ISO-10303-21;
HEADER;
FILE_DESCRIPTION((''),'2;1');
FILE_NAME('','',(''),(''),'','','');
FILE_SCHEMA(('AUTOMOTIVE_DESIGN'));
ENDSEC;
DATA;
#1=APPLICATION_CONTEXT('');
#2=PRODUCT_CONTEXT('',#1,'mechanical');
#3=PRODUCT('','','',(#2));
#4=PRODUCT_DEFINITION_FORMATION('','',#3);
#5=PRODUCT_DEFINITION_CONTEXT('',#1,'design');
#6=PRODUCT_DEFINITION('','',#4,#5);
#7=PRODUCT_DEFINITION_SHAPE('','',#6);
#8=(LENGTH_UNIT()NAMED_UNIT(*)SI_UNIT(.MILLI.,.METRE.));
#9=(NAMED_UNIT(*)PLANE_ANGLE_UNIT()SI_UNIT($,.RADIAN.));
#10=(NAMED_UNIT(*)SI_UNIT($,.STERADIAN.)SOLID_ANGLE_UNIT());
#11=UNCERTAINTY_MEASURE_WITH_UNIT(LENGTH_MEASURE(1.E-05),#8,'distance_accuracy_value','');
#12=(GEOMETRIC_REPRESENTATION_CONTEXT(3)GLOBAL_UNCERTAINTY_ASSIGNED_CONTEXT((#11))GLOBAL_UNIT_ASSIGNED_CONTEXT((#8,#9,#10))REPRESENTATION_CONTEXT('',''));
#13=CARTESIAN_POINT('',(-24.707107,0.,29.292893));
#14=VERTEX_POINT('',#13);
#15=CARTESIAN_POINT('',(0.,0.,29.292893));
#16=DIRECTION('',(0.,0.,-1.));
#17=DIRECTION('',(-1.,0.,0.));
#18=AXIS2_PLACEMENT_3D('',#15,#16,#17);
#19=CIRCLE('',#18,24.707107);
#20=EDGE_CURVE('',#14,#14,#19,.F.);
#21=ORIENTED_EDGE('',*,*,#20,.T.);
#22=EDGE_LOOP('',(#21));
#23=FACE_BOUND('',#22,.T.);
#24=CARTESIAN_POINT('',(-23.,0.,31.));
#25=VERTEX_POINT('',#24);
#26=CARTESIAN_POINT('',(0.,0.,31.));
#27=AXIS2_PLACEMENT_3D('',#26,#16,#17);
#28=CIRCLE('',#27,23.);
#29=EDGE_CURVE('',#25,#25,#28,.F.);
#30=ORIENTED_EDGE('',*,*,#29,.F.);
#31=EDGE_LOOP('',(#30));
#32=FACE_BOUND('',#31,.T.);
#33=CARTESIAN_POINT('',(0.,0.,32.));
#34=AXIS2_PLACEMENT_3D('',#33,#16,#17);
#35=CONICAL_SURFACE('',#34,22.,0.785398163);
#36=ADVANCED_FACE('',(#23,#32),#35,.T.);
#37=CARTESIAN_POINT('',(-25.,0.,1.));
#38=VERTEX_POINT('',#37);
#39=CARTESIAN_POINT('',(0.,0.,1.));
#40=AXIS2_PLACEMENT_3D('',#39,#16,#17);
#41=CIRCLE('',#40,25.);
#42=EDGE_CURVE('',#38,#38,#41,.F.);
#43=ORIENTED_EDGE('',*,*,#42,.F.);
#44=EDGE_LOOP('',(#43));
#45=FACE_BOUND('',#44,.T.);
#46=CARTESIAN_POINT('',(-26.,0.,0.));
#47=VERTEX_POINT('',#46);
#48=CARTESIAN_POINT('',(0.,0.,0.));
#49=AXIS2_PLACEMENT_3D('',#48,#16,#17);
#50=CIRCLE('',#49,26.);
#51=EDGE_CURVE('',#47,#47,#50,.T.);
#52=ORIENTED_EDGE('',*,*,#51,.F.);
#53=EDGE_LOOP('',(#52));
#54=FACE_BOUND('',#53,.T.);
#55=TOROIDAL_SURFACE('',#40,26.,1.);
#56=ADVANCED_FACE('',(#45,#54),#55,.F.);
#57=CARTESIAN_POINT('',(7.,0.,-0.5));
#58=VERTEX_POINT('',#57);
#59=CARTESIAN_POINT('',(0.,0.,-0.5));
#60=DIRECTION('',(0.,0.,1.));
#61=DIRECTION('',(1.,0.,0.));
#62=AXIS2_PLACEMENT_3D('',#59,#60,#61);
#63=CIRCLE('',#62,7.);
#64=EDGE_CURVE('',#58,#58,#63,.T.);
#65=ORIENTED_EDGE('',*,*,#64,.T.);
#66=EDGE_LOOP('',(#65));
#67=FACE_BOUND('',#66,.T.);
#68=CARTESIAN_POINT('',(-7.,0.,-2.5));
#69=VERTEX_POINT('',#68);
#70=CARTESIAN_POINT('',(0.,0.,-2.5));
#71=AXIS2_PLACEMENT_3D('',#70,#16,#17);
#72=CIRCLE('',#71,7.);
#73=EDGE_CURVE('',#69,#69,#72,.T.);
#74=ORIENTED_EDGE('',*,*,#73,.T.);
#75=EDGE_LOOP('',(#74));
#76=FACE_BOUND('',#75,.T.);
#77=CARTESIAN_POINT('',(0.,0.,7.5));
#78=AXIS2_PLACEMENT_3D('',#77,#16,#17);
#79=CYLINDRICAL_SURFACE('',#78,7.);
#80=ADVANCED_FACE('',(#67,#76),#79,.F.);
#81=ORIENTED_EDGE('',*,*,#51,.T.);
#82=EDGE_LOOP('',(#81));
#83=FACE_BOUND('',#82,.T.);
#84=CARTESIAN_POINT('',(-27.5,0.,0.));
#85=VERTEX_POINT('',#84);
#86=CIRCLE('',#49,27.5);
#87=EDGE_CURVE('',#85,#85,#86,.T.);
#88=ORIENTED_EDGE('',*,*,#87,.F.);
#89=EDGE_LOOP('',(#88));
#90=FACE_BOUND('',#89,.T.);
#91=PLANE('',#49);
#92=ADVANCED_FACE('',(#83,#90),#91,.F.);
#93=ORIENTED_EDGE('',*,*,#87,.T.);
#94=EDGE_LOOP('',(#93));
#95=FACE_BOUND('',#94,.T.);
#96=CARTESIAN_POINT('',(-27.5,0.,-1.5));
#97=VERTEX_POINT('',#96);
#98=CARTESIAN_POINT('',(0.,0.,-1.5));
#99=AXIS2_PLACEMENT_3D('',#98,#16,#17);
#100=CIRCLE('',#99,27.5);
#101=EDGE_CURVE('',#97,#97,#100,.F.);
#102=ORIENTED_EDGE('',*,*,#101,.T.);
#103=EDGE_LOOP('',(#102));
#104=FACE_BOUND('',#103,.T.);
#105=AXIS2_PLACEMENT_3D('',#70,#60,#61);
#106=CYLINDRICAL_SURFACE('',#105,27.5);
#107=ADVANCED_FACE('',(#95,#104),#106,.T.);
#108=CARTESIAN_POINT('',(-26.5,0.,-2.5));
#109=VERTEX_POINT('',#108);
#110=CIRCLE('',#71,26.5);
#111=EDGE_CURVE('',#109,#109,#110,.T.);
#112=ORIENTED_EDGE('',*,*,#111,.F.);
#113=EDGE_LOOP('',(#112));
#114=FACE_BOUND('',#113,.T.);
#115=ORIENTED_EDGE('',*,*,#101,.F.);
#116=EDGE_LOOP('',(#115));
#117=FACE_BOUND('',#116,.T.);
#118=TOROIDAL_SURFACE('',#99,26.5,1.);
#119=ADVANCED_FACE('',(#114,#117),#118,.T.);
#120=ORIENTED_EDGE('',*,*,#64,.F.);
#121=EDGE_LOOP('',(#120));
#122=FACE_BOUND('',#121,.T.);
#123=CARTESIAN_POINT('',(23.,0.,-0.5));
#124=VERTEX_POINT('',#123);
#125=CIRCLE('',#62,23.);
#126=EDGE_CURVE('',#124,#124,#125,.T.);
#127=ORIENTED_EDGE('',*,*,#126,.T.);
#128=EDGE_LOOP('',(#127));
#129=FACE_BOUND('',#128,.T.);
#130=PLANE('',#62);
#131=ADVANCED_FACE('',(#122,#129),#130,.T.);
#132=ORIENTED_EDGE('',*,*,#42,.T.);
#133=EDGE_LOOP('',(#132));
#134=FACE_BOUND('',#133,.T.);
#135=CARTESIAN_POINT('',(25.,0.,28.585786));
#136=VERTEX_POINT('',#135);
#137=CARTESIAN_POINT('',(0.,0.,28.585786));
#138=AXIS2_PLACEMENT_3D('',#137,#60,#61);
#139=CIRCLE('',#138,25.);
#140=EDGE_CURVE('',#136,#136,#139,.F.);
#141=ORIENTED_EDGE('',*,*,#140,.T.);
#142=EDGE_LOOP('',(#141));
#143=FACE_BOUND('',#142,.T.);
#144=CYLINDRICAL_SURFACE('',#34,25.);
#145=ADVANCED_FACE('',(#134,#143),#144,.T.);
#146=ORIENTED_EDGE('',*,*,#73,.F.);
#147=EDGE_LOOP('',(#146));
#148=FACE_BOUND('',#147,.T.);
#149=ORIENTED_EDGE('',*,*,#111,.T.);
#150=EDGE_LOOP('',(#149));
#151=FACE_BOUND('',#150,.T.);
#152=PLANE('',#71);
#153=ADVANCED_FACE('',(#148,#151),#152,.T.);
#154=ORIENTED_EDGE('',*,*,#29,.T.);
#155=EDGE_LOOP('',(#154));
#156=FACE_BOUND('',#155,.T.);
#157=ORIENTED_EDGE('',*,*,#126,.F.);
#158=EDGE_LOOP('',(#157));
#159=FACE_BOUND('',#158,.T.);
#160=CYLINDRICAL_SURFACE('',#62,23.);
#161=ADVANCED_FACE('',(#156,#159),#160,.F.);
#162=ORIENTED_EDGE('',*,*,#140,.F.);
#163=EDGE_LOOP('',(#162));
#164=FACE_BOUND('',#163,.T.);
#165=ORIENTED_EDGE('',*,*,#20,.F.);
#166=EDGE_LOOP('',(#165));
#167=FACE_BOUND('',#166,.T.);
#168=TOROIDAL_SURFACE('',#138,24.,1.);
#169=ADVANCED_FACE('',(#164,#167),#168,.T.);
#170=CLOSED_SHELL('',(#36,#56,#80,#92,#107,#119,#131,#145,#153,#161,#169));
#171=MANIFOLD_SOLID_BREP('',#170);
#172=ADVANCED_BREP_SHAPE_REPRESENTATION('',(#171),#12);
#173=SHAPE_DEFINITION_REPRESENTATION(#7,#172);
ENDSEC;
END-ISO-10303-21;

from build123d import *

# Parameters (mm, degrees)
SKETCH_1_R          = 25
EXTRUDE_1_DEPTH     = 32
SKETCH_2_R          = 27.5
EXTRUDE_2_DEPTH     = 2.5
SKETCH_3_R          = 23
CUT_EXTRUDE_1_DEPTH = 32.5
CHAMFER_1_SIZE      = 3
FILLET_1_R          = 1
FILLET_2_R          = 1
FILLET_3_R          = 1
SKETCH_4_R          = 1.6
CUT_EXTRUDE_2_DEPTH = 32.5
SKETCH_5_R          = 7
CUT_EXTRUDE_3_DEPTH = 10


with BuildPart() as part:
    # Эскиз1 → Бобышка-Вытянуть1 (new body)
    with BuildSketch(Plane.XY):
        Circle(SKETCH_1_R)
    extrude(amount=EXTRUDE_1_DEPTH)

    # Эскиз2 → Бобышка-Вытянуть2 (add)
    with BuildSketch(Plane(origin=(0, 0, 0), x_dir=(-1, 0, 0), z_dir=(0, 0, -1))):
        Circle(SKETCH_2_R)
    extrude(amount=EXTRUDE_2_DEPTH)

    # Эскиз3 → Вырез-Вытянуть1 (cut)
    with BuildSketch(Plane.XY.offset(32)):
        Circle(SKETCH_3_R)
    extrude(amount=-CUT_EXTRUDE_1_DEPTH, mode=Mode.SUBTRACT)

    # Фаска1
    # the kernel refuses this chamfer: 3 mm, written as the material it takes off along each edge
    with BuildSketch(Plane(origin=(0, 0, 32), x_dir=(1, 0, 0), z_dir=(0, -1, 0))) as chamfer_1_piece_1:
        Polygon((25, -CHAMFER_1_SIZE), (25 - CHAMFER_1_SIZE, 0), (25, 0), align=None)
    revolve(axis=Axis((0, 0, 32), (0, 0, 1)), mode=Mode.SUBTRACT)

    # Скругление1
    fillet_1_edges = [part.edges().sort_by_distance(p)[0] for p in [
        (-25, 0, 29),
    ]]
    fillet(fillet_1_edges, radius=FILLET_1_R)

    # Скругление2
    fillet_2_edges = [part.edges().sort_by_distance(p)[0] for p in [
        (-25, 0, 0),
    ]]
    fillet(fillet_2_edges, radius=FILLET_2_R)

    # Скругление3
    fillet_3_edges = [part.edges().sort_by_distance(p)[0] for p in [
        (27.5, 0, -2.5),
    ]]
    fillet(fillet_3_edges, radius=FILLET_3_R)

    # Эскиз4 → Вырез-Вытянуть2 (cut)
    with BuildSketch(Plane(origin=(0, 0, -2.5), x_dir=(-1, 0, 0), z_dir=(0, 0, -1))):
        Circle(SKETCH_4_R)
    extrude(amount=-CUT_EXTRUDE_2_DEPTH, mode=Mode.SUBTRACT)

    # Эскиз5 → Вырез-Вытянуть3 (cut)
    with BuildSketch(Plane(origin=(0, 0, -2.5), x_dir=(-1, 0, 0), z_dir=(0, 0, -1))):
        Circle(SKETCH_5_R)
    extrude(amount=-CUT_EXTRUDE_3_DEPTH, mode=Mode.SUBTRACT)


solid = part.part
